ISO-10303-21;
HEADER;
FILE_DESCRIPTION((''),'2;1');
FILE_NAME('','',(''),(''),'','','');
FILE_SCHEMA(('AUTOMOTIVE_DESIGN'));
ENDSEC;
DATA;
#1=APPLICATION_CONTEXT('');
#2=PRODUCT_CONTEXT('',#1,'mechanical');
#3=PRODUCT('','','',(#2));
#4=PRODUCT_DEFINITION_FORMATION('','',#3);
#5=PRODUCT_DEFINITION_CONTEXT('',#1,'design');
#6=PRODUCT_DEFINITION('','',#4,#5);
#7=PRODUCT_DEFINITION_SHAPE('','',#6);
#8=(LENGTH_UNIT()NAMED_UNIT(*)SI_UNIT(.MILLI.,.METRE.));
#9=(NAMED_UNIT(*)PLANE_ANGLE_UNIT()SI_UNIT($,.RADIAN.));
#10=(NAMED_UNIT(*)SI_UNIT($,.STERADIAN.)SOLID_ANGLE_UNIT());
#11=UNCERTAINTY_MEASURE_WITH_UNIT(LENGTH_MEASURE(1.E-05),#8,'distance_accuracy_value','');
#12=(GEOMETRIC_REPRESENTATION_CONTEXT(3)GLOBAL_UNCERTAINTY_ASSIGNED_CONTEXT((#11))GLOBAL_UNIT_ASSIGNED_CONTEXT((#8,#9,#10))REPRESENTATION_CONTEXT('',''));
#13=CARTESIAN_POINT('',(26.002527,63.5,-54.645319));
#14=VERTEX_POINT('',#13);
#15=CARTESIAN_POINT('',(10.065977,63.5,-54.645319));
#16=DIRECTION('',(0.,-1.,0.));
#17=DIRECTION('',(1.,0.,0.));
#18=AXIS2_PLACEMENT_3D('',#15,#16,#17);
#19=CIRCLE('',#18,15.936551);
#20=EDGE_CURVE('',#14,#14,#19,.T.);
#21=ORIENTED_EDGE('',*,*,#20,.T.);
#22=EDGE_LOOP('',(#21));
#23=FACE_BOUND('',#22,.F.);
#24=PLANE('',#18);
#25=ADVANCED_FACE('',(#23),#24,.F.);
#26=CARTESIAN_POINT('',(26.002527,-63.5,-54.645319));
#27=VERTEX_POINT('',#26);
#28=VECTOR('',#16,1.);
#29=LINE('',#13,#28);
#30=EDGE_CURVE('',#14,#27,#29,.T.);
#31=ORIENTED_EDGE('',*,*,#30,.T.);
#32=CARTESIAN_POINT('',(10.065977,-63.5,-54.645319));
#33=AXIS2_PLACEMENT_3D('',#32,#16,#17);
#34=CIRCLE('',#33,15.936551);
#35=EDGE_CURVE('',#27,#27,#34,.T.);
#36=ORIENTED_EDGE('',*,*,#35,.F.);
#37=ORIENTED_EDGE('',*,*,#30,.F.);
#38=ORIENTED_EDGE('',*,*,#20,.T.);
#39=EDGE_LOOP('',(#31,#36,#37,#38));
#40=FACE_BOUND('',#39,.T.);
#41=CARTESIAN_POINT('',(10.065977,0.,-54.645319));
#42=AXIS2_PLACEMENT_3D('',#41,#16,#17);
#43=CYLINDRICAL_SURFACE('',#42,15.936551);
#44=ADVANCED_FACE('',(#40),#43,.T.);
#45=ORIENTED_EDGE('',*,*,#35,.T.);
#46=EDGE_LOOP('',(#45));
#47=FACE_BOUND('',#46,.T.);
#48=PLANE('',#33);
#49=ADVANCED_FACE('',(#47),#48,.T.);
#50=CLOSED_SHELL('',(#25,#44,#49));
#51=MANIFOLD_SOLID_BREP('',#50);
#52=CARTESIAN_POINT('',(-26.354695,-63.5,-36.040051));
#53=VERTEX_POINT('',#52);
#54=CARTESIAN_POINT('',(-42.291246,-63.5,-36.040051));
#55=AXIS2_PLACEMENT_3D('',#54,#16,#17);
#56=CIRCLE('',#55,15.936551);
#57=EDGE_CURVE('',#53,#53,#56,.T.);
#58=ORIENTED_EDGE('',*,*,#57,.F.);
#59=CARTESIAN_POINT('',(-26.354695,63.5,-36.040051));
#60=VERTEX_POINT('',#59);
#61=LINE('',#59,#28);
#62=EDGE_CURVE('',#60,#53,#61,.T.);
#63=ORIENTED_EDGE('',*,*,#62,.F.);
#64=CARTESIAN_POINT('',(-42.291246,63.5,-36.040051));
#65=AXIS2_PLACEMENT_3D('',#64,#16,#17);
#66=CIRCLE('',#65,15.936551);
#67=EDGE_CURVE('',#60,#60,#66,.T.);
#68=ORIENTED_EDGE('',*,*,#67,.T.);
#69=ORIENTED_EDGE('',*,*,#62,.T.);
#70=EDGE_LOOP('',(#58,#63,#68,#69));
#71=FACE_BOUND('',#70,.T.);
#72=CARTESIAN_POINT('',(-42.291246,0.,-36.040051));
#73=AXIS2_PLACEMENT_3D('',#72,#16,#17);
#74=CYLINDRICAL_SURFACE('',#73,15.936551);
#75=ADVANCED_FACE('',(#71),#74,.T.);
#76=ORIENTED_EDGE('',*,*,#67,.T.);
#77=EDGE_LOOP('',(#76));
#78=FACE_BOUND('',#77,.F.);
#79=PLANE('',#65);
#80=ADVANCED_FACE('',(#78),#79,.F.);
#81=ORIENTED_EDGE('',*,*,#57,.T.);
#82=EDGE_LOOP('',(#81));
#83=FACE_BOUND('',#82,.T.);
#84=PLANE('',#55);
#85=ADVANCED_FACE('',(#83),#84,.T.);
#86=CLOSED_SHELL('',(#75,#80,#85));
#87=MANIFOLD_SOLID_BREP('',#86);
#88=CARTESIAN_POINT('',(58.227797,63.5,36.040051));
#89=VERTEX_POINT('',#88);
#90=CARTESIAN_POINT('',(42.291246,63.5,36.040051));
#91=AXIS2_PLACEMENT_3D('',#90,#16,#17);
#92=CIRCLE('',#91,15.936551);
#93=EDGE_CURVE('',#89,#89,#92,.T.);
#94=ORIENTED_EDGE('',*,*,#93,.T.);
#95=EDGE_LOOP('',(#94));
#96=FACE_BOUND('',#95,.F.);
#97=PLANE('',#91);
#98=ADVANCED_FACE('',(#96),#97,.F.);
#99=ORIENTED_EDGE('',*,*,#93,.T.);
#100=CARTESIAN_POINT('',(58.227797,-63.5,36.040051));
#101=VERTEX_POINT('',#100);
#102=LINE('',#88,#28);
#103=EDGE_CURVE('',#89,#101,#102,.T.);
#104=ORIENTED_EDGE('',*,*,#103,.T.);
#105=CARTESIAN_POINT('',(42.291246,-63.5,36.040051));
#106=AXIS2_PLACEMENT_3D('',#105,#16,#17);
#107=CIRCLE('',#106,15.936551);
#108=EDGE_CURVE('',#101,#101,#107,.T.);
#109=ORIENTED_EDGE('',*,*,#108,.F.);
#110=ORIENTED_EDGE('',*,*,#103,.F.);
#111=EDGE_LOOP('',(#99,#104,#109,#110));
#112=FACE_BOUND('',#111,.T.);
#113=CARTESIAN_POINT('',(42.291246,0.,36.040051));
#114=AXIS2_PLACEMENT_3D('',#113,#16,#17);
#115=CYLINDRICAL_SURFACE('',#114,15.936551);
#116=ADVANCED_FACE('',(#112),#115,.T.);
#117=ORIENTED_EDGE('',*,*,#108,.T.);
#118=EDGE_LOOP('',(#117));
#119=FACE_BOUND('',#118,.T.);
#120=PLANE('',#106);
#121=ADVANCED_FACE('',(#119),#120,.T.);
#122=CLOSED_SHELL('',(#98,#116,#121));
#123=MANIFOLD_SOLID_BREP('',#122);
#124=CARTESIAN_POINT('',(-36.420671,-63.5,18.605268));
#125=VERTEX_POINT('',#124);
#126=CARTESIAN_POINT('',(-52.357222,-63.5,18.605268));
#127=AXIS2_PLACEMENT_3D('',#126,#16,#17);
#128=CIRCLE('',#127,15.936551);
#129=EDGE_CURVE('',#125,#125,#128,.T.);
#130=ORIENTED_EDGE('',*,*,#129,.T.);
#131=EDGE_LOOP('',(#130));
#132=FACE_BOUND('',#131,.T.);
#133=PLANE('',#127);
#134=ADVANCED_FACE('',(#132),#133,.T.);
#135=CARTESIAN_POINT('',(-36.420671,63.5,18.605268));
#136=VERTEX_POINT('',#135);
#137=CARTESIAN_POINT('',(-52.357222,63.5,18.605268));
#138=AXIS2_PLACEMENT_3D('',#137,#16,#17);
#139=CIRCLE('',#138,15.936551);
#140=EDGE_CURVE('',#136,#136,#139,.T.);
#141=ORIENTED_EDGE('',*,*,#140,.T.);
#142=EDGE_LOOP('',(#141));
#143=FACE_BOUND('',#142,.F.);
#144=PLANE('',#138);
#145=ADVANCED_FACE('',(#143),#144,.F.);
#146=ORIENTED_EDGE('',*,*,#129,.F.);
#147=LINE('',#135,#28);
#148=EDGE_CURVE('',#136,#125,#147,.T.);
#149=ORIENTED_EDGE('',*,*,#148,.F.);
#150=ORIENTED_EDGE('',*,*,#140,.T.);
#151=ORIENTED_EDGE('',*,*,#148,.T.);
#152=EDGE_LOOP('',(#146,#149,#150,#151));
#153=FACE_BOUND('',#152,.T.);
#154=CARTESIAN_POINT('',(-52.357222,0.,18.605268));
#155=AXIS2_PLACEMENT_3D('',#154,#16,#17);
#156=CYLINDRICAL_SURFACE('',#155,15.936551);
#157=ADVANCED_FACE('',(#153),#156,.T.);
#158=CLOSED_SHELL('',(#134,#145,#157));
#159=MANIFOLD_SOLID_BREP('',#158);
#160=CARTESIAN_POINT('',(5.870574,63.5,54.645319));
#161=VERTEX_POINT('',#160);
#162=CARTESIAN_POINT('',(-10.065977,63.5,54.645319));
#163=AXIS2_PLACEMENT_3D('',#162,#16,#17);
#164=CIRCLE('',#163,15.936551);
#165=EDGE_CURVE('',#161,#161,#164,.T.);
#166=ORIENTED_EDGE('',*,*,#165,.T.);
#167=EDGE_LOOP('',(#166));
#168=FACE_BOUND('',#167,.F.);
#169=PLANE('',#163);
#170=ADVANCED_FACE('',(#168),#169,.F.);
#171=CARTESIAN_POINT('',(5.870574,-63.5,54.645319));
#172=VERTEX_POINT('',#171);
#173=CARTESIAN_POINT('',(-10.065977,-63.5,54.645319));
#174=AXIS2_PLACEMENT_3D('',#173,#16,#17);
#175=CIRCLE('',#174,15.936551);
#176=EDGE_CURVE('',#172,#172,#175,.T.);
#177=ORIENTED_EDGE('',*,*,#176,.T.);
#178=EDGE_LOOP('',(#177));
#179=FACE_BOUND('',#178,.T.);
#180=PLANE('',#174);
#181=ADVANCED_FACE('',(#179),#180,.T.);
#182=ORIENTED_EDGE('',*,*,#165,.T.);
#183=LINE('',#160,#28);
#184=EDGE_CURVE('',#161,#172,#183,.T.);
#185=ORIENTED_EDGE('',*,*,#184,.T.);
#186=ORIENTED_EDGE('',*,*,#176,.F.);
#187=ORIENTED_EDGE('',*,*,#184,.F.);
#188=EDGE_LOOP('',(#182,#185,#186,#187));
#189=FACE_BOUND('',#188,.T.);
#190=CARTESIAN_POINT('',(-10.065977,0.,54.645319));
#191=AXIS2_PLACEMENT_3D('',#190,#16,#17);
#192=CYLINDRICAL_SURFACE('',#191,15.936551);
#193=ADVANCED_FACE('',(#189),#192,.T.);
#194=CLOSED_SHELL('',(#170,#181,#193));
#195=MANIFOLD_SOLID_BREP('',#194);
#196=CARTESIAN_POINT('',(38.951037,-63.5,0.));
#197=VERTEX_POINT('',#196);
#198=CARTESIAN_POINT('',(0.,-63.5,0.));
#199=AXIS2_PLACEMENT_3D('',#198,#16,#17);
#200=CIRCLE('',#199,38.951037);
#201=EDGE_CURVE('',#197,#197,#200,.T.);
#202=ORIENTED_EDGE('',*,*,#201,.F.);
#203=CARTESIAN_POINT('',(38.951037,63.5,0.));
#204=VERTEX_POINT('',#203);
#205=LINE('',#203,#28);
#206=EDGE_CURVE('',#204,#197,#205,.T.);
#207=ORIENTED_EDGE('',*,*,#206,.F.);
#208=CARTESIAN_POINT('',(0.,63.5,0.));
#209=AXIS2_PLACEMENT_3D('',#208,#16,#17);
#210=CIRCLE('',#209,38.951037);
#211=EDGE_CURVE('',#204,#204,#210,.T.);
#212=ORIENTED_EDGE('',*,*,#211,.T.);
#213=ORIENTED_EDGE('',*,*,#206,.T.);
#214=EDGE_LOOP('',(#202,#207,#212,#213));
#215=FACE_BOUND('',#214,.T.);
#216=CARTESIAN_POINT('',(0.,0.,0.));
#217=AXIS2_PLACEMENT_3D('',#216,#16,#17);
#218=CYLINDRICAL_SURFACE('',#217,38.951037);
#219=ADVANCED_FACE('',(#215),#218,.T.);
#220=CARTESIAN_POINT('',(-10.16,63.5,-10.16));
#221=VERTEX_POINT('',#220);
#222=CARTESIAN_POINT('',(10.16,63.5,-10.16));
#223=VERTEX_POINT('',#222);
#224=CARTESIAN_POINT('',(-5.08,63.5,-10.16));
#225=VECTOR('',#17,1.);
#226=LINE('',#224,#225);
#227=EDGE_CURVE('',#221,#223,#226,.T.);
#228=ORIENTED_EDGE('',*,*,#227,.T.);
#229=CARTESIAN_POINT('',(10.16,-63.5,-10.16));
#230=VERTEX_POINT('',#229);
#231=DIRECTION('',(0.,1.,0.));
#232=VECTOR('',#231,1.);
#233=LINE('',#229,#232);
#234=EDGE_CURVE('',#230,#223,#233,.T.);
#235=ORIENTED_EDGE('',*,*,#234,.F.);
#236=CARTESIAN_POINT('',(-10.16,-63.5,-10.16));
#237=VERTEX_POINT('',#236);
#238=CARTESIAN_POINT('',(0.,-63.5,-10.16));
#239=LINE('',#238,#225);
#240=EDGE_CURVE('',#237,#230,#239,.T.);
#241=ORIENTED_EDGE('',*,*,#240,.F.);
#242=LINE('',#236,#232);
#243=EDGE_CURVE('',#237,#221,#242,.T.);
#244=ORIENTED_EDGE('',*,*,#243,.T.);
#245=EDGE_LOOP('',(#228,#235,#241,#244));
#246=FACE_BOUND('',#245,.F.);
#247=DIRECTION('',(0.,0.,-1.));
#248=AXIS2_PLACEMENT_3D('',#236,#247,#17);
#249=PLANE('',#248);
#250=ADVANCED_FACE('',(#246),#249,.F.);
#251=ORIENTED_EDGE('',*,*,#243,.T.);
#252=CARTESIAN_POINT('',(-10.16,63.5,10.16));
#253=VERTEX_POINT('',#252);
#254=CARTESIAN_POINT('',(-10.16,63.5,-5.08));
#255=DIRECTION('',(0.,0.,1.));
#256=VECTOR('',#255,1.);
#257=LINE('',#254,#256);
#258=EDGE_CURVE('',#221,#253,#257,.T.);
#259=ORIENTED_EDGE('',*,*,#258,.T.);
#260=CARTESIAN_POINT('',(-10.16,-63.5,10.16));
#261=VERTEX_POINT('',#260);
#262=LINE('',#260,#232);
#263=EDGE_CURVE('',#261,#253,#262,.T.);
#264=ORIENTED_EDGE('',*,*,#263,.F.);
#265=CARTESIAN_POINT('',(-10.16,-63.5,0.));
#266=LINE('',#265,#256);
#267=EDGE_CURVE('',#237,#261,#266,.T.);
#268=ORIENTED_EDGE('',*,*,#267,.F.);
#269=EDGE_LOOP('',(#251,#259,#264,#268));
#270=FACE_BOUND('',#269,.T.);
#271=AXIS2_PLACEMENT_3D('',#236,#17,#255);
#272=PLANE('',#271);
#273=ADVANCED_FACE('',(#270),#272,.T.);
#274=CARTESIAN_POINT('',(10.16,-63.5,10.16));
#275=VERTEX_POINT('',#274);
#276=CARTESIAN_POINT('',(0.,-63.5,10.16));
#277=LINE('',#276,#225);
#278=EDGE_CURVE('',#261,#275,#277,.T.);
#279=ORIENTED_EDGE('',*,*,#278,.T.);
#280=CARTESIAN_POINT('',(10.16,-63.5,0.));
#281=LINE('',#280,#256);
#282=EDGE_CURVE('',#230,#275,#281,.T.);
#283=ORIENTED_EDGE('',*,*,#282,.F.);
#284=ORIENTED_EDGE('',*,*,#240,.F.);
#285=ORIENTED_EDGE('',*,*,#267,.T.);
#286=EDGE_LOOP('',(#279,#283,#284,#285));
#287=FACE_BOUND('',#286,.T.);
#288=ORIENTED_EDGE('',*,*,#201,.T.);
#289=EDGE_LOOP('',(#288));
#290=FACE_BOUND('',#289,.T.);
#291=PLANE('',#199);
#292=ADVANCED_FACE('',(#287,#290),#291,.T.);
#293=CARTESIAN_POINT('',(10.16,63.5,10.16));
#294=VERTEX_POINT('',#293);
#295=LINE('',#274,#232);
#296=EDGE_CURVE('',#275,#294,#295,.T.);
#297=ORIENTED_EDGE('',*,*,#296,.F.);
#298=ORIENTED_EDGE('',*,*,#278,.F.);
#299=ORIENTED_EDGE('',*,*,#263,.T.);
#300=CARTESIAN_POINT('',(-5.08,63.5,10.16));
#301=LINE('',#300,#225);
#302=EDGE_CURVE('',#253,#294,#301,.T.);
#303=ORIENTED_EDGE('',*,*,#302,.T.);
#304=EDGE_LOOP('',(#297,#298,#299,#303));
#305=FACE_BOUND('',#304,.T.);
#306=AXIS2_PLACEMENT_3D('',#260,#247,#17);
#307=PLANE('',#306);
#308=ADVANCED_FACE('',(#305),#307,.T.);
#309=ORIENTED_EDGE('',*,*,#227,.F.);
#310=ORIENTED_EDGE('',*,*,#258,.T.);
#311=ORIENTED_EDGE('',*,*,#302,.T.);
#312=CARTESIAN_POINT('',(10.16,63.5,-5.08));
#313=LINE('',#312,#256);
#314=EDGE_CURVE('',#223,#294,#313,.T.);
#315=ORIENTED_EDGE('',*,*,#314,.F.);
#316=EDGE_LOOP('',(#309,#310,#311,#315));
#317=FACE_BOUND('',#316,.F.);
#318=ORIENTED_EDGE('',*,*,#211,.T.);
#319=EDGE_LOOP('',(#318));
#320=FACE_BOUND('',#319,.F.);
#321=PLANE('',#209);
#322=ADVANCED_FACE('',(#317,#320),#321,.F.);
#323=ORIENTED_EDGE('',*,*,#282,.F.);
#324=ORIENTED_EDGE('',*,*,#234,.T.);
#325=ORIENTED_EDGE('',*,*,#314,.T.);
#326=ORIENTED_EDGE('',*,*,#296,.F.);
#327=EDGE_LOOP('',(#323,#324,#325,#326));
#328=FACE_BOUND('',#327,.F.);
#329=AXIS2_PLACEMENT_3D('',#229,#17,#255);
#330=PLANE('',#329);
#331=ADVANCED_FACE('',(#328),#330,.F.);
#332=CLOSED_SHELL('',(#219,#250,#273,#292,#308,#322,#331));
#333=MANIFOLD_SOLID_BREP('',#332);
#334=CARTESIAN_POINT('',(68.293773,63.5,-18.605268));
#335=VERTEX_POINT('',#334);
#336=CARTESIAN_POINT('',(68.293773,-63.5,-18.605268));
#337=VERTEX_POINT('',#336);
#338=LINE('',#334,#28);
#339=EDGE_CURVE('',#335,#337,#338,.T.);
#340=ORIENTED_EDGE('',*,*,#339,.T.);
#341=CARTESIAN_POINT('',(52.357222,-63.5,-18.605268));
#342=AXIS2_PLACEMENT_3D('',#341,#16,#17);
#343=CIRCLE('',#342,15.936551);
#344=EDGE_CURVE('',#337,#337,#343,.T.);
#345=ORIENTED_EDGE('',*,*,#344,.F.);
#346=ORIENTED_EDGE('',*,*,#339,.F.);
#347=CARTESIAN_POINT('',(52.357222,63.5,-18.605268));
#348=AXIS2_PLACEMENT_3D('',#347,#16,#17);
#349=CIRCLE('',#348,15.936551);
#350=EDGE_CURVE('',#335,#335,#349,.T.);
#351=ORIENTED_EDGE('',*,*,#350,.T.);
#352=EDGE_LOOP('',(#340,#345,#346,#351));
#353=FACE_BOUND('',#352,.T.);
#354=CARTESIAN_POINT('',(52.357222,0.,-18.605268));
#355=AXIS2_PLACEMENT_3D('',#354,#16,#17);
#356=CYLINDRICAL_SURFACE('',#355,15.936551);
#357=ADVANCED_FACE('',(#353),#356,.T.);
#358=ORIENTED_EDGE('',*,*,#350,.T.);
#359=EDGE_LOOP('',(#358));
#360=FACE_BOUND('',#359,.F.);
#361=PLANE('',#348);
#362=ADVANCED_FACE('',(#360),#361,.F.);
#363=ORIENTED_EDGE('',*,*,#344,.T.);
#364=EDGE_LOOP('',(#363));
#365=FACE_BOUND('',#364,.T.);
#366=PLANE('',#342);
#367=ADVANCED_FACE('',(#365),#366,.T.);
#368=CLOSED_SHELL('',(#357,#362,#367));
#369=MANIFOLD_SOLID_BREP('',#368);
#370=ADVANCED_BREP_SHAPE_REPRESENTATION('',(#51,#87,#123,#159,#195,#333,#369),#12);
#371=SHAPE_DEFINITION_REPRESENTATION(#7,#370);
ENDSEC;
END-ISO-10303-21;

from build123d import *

# Parameters (mm, degrees)
F0_R     = 15.936550819
F1_DEPTH = 63.5
F0_R_2   = 38.9510369052
F0_R_3   = 26.7223642195
F5_DEPTH = 25.4
F8_W     = 20.32
F8_H     = 20.32
F9_DEPTH = 127.001


# Not quite as in the source:
# - the program builds the solid bodies; features that only make, move or delete a surface that nothing else refers to are left out


with BuildPart() as f1:
    # F0 (on Front) → F1 (new body, symmetric)
    with BuildSketch(Plane.XZ):
        with Locations((42.2912457866, 36.0400506581)):
            Circle(F0_R)
    extrude(amount=F1_DEPTH, both=True)

    # F4 (on face) → F5 (cut)
    with BuildSketch(Plane(origin=(23.2564192551, 0, 0), x_dir=(0, -1, 0), z_dir=(-1, 0, 0))):
        Polygon((-131.7048221827, 0), (-70.3143179417, 0), (-70.3143179417, 7.7529181726), (-170.3111678362, 7.7529181726), (-170.3111678362, 0), align=None)
        Polygon((-70.3143179417, -7.7529181726), (-70.3143179417, 0), (-131.7048221827, 0), (-170.3111678362, 0), (-170.3111678362, -7.7529181726), align=None)
    extrude(amount=-F5_DEPTH, mode=Mode.SUBTRACT)


with BuildPart() as f1b:
    # F0 (on Front) → F1, piece 2 (new body, symmetric)
    with BuildSketch(Plane.XZ):
        Circle(F0_R_2)
        Circle(F0_R_3, mode=Mode.SUBTRACT)
        Circle(F0_R_3)
    extrude(amount=F1_DEPTH, both=True)

    # F8 (on face) → F9 (cut, through all)
    with BuildSketch(Plane.XZ.offset(63.5)):
        Rectangle(F8_W, F8_H)
    extrude(amount=-F9_DEPTH, mode=Mode.SUBTRACT)


with BuildPart() as f1c:
    # F0 (on Front) → F1, piece 3 (new body, symmetric)
    with BuildSketch(Plane.XZ):
        with Locations((-10.0659765303, 54.645318538)):
            Circle(F0_R)
    extrude(amount=F1_DEPTH, both=True)


with BuildPart() as f1d:
    # F0 (on Front) → F1, piece 4 (new body, symmetric)
    with BuildSketch(Plane.XZ):
        with Locations((-52.3572223169, 18.6052678798)):
            Circle(F0_R)
    extrude(amount=F1_DEPTH, both=True)


with BuildPart() as f1e:
    # F0 (on Front) → F1, piece 5 (new body, symmetric)
    with BuildSketch(Plane.XZ):
        with Locations((-42.2912457866, -36.0400506581)):
            Circle(F0_R)
    extrude(amount=F1_DEPTH, both=True)


with BuildPart() as f1f:
    # F0 (on Front) → F1, piece 6 (new body, symmetric)
    with BuildSketch(Plane.XZ):
        with Locations((10.0659765303, -54.645318538)):
            Circle(F0_R)
    extrude(amount=F1_DEPTH, both=True)


with BuildPart() as f1g:
    # F0 (on Front) → F1, piece 7 (new body, symmetric)
    with BuildSketch(Plane.XZ):
        with Locations((52.3572223169, -18.6052678798)):
            Circle(F0_R)
    extrude(amount=F1_DEPTH, both=True)


solid = Compound([f1.part, f1b.part, f1c.part, f1d.part, f1e.part, f1f.part, f1g.part])
